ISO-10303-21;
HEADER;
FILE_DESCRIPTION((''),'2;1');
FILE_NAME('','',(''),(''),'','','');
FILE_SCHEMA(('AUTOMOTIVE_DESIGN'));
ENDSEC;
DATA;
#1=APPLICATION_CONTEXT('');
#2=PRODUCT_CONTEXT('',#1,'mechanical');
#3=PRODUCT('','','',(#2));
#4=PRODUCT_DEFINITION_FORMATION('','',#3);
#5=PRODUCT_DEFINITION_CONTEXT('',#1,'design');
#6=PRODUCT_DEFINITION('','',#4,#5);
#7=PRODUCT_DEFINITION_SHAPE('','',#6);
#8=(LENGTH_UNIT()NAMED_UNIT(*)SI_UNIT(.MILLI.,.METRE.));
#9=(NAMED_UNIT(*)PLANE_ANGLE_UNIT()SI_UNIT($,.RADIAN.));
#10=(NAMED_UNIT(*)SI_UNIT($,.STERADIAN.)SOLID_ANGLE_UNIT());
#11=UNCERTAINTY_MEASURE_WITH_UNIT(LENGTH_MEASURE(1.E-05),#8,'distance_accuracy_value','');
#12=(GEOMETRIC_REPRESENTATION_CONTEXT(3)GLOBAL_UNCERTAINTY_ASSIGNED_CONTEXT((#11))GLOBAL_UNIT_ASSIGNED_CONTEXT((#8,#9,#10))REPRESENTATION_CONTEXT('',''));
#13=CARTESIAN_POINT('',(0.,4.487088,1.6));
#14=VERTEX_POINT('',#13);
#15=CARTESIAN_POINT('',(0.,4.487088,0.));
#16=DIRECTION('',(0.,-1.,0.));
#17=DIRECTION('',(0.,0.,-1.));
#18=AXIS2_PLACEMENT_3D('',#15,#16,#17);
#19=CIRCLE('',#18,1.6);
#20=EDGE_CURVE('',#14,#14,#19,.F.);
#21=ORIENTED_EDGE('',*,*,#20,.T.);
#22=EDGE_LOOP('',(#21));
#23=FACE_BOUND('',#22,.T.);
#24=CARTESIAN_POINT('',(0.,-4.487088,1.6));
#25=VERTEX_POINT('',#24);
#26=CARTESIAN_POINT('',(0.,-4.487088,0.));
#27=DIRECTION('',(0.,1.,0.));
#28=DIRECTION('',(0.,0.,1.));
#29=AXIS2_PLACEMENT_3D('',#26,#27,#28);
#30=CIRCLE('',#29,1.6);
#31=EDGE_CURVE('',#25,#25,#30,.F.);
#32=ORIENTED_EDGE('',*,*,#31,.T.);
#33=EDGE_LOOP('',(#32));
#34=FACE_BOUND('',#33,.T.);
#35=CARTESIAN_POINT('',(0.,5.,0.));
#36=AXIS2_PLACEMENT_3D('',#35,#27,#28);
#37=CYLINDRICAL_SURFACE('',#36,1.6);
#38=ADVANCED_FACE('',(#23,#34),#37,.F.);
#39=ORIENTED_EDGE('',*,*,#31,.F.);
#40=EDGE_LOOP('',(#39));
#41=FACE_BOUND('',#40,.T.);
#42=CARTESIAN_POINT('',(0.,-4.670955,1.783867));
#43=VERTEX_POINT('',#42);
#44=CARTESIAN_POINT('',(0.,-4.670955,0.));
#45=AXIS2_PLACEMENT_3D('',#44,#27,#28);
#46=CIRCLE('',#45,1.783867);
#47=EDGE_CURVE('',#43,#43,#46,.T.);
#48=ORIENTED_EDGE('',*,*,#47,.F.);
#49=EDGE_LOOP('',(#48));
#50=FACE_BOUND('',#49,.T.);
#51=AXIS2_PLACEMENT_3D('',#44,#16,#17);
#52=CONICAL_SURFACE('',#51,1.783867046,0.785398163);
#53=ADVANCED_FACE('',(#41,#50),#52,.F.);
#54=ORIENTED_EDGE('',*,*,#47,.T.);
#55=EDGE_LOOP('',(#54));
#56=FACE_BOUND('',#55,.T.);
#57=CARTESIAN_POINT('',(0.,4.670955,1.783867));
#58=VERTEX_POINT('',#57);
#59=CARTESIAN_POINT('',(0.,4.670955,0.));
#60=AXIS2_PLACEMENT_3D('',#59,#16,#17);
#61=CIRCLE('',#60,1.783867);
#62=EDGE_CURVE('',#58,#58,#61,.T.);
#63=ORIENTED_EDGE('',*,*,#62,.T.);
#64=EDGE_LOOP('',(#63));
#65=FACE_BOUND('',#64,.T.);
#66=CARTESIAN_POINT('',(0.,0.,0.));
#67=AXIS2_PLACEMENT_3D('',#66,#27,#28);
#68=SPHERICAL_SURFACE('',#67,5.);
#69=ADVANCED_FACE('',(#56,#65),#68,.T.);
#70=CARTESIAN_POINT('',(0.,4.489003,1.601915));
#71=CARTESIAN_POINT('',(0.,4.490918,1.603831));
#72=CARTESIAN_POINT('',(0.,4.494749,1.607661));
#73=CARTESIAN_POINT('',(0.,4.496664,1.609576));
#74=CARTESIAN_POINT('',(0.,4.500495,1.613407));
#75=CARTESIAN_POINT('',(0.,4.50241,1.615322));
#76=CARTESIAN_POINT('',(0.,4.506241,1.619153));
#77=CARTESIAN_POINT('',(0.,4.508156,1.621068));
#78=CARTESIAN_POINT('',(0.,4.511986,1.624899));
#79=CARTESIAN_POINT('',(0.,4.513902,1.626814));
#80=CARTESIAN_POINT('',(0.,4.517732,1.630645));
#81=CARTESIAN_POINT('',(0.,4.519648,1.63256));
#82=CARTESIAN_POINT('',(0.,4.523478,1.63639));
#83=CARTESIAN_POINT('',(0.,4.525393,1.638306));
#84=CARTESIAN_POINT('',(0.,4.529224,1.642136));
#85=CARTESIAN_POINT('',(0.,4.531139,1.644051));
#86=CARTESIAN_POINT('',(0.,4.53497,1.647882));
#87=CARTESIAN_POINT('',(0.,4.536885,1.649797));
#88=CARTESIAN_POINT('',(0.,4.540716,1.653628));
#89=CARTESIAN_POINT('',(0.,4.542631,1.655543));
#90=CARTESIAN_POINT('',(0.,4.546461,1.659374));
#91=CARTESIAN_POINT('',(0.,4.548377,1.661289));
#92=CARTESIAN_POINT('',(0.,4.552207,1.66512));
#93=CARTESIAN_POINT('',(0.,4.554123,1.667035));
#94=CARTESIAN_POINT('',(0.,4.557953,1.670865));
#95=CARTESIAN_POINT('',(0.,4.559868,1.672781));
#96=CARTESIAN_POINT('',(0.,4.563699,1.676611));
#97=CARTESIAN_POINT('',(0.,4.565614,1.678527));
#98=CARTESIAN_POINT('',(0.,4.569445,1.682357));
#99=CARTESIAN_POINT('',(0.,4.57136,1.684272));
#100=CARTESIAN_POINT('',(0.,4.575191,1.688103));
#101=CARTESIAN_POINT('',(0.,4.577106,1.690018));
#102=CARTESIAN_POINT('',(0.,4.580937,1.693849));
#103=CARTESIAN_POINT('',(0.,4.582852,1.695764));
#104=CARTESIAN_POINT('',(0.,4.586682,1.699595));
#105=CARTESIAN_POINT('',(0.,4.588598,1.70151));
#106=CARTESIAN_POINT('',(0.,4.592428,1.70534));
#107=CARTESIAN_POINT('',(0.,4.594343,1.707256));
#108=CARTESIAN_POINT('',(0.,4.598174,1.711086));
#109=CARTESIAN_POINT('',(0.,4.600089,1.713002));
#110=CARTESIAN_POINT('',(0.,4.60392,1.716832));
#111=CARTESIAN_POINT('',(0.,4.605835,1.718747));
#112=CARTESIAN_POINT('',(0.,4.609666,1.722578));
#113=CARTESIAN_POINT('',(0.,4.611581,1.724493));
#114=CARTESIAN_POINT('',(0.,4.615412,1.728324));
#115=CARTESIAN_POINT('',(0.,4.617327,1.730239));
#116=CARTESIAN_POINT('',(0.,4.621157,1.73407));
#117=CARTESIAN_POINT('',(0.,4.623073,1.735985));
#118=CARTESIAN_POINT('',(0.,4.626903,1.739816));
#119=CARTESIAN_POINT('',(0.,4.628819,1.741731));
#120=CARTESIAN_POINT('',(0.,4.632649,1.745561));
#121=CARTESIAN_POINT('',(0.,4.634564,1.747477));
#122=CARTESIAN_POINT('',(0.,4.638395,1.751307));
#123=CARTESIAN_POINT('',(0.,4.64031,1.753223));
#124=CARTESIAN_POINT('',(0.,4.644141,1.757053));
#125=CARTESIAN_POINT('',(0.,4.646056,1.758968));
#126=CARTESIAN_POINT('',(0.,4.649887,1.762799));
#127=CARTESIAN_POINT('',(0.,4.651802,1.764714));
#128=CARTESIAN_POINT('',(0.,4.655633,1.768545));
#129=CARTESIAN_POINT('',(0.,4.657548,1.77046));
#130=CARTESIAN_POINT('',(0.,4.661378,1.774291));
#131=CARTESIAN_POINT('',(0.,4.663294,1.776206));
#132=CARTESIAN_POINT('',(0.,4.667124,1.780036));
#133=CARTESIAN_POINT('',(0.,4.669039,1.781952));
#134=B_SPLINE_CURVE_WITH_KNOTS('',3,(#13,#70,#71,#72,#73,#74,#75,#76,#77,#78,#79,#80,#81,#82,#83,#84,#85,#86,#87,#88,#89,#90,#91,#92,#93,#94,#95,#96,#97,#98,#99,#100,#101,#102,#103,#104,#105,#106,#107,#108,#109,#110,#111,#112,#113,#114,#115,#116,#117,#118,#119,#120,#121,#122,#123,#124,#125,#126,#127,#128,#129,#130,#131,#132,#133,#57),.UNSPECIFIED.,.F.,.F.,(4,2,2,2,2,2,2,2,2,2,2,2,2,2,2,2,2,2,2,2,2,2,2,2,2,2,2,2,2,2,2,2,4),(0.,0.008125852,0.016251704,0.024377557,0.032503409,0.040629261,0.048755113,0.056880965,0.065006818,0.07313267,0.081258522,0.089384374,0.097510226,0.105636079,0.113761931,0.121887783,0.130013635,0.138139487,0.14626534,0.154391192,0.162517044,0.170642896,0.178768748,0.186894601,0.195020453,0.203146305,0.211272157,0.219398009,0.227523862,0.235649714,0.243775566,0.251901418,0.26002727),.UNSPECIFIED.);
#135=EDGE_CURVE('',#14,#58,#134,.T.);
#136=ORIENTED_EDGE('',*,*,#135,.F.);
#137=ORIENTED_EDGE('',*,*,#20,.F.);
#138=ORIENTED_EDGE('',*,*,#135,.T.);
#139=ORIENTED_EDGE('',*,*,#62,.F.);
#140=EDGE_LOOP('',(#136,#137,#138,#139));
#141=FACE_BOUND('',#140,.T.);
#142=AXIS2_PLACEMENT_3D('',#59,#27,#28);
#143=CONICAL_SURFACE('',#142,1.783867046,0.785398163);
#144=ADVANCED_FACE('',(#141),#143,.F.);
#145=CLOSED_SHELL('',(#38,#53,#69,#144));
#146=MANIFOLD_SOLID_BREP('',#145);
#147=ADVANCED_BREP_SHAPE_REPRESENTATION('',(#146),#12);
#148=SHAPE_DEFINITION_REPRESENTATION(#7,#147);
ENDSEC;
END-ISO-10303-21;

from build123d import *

# Parameters (mm, degrees)
M3_CLEARANCE_HOLE1_D = 3.2
CHAMFER1_SIZE        = 0.25


with BuildPart() as part:
    # Sketch2 → Revolve1 (revolve)
    with BuildSketch(Plane.XY):
        with BuildLine():
            Line((-5, 0), (5, 0))
            ThreePointArc((5, 0), (0, 5), (-5, 0))
        make_face()
    revolve(axis=Axis((-5, 0, 0), (1, 0, 0)))

    # M3 Clearance Hole1 (through all)
    with Locations(Plane(origin=(0, 5, 0), x_dir=(1, 0, 0), z_dir=(0, 1, 0))):
        with Locations((0, 0)):
            Hole(M3_CLEARANCE_HOLE1_D / 2)

    # Chamfer1
    # the kernel refuses this chamfer: 0.25, 0.197251491 mm, written as the material it takes off along each edge
    with BuildSketch(Plane(origin=(-3e-09, -4.737087713, 0), x_dir=(-1.0, 0, -1.7241398847038223e-10), z_dir=(-1.7241398847038223e-10, 0, 1.0))) as chamfer1_piece_1:
        with BuildLine():
            Line((1.783867045, -0.066132952), (1.600000003, -0.249999994))
            Line((1.600000003, -0.249999994), (1.599999997, 0))
            ThreePointArc((1.599999997, 0), (1.69425958, -0.032889111), (1.783867045, -0.066132952))
        make_face()
    revolve(axis=Axis((-3e-09, -4.737087713, 0), (0, -1, 0)), mode=Mode.SUBTRACT)
    with BuildSketch(Plane(origin=(0, 4.737087713, 5e-09), x_dir=(-1.0, 0, -2.962106121087604e-09), z_dir=(-2.962106121087604e-09, 0, 1.0))) as chamfer1_piece_2:
        with BuildLine():
            Line((1.783867047, 0.066132952), (1.600000005, 0.249999995))
            Line((1.600000005, 0.249999995), (1.6, 0))
            ThreePointArc((1.6, 0), (1.694259582, 0.032889111), (1.783867047, 0.066132952))
        make_face()
    revolve(axis=Axis((0, 4.737087713, 5e-09), (0, -1, 0)), revolution_arc=179.999999661, mode=Mode.SUBTRACT)
    with BuildSketch(Plane(origin=(0, 4.737087713, 0), x_dir=(1.0, 0, -6.014235446318052e-11), z_dir=(-6.014235446318052e-11, -1.2821909266166277e-15, -1.0))) as chamfer1_piece_3:
        with BuildLine():
            Line((1.783867046, 0.066132954), (1.6, CHAMFER1_SIZE))
            Line((1.6, CHAMFER1_SIZE), (1.6, 0))
            ThreePointArc((1.6, 0), (1.694259582, 0.032889113), (1.783867046, 0.066132954))
        make_face()
    revolve(axis=Axis((0, 4.737087713, 0), (0, -1, 0)), revolution_arc=180.000000007, mode=Mode.SUBTRACT)


solid = part.part
